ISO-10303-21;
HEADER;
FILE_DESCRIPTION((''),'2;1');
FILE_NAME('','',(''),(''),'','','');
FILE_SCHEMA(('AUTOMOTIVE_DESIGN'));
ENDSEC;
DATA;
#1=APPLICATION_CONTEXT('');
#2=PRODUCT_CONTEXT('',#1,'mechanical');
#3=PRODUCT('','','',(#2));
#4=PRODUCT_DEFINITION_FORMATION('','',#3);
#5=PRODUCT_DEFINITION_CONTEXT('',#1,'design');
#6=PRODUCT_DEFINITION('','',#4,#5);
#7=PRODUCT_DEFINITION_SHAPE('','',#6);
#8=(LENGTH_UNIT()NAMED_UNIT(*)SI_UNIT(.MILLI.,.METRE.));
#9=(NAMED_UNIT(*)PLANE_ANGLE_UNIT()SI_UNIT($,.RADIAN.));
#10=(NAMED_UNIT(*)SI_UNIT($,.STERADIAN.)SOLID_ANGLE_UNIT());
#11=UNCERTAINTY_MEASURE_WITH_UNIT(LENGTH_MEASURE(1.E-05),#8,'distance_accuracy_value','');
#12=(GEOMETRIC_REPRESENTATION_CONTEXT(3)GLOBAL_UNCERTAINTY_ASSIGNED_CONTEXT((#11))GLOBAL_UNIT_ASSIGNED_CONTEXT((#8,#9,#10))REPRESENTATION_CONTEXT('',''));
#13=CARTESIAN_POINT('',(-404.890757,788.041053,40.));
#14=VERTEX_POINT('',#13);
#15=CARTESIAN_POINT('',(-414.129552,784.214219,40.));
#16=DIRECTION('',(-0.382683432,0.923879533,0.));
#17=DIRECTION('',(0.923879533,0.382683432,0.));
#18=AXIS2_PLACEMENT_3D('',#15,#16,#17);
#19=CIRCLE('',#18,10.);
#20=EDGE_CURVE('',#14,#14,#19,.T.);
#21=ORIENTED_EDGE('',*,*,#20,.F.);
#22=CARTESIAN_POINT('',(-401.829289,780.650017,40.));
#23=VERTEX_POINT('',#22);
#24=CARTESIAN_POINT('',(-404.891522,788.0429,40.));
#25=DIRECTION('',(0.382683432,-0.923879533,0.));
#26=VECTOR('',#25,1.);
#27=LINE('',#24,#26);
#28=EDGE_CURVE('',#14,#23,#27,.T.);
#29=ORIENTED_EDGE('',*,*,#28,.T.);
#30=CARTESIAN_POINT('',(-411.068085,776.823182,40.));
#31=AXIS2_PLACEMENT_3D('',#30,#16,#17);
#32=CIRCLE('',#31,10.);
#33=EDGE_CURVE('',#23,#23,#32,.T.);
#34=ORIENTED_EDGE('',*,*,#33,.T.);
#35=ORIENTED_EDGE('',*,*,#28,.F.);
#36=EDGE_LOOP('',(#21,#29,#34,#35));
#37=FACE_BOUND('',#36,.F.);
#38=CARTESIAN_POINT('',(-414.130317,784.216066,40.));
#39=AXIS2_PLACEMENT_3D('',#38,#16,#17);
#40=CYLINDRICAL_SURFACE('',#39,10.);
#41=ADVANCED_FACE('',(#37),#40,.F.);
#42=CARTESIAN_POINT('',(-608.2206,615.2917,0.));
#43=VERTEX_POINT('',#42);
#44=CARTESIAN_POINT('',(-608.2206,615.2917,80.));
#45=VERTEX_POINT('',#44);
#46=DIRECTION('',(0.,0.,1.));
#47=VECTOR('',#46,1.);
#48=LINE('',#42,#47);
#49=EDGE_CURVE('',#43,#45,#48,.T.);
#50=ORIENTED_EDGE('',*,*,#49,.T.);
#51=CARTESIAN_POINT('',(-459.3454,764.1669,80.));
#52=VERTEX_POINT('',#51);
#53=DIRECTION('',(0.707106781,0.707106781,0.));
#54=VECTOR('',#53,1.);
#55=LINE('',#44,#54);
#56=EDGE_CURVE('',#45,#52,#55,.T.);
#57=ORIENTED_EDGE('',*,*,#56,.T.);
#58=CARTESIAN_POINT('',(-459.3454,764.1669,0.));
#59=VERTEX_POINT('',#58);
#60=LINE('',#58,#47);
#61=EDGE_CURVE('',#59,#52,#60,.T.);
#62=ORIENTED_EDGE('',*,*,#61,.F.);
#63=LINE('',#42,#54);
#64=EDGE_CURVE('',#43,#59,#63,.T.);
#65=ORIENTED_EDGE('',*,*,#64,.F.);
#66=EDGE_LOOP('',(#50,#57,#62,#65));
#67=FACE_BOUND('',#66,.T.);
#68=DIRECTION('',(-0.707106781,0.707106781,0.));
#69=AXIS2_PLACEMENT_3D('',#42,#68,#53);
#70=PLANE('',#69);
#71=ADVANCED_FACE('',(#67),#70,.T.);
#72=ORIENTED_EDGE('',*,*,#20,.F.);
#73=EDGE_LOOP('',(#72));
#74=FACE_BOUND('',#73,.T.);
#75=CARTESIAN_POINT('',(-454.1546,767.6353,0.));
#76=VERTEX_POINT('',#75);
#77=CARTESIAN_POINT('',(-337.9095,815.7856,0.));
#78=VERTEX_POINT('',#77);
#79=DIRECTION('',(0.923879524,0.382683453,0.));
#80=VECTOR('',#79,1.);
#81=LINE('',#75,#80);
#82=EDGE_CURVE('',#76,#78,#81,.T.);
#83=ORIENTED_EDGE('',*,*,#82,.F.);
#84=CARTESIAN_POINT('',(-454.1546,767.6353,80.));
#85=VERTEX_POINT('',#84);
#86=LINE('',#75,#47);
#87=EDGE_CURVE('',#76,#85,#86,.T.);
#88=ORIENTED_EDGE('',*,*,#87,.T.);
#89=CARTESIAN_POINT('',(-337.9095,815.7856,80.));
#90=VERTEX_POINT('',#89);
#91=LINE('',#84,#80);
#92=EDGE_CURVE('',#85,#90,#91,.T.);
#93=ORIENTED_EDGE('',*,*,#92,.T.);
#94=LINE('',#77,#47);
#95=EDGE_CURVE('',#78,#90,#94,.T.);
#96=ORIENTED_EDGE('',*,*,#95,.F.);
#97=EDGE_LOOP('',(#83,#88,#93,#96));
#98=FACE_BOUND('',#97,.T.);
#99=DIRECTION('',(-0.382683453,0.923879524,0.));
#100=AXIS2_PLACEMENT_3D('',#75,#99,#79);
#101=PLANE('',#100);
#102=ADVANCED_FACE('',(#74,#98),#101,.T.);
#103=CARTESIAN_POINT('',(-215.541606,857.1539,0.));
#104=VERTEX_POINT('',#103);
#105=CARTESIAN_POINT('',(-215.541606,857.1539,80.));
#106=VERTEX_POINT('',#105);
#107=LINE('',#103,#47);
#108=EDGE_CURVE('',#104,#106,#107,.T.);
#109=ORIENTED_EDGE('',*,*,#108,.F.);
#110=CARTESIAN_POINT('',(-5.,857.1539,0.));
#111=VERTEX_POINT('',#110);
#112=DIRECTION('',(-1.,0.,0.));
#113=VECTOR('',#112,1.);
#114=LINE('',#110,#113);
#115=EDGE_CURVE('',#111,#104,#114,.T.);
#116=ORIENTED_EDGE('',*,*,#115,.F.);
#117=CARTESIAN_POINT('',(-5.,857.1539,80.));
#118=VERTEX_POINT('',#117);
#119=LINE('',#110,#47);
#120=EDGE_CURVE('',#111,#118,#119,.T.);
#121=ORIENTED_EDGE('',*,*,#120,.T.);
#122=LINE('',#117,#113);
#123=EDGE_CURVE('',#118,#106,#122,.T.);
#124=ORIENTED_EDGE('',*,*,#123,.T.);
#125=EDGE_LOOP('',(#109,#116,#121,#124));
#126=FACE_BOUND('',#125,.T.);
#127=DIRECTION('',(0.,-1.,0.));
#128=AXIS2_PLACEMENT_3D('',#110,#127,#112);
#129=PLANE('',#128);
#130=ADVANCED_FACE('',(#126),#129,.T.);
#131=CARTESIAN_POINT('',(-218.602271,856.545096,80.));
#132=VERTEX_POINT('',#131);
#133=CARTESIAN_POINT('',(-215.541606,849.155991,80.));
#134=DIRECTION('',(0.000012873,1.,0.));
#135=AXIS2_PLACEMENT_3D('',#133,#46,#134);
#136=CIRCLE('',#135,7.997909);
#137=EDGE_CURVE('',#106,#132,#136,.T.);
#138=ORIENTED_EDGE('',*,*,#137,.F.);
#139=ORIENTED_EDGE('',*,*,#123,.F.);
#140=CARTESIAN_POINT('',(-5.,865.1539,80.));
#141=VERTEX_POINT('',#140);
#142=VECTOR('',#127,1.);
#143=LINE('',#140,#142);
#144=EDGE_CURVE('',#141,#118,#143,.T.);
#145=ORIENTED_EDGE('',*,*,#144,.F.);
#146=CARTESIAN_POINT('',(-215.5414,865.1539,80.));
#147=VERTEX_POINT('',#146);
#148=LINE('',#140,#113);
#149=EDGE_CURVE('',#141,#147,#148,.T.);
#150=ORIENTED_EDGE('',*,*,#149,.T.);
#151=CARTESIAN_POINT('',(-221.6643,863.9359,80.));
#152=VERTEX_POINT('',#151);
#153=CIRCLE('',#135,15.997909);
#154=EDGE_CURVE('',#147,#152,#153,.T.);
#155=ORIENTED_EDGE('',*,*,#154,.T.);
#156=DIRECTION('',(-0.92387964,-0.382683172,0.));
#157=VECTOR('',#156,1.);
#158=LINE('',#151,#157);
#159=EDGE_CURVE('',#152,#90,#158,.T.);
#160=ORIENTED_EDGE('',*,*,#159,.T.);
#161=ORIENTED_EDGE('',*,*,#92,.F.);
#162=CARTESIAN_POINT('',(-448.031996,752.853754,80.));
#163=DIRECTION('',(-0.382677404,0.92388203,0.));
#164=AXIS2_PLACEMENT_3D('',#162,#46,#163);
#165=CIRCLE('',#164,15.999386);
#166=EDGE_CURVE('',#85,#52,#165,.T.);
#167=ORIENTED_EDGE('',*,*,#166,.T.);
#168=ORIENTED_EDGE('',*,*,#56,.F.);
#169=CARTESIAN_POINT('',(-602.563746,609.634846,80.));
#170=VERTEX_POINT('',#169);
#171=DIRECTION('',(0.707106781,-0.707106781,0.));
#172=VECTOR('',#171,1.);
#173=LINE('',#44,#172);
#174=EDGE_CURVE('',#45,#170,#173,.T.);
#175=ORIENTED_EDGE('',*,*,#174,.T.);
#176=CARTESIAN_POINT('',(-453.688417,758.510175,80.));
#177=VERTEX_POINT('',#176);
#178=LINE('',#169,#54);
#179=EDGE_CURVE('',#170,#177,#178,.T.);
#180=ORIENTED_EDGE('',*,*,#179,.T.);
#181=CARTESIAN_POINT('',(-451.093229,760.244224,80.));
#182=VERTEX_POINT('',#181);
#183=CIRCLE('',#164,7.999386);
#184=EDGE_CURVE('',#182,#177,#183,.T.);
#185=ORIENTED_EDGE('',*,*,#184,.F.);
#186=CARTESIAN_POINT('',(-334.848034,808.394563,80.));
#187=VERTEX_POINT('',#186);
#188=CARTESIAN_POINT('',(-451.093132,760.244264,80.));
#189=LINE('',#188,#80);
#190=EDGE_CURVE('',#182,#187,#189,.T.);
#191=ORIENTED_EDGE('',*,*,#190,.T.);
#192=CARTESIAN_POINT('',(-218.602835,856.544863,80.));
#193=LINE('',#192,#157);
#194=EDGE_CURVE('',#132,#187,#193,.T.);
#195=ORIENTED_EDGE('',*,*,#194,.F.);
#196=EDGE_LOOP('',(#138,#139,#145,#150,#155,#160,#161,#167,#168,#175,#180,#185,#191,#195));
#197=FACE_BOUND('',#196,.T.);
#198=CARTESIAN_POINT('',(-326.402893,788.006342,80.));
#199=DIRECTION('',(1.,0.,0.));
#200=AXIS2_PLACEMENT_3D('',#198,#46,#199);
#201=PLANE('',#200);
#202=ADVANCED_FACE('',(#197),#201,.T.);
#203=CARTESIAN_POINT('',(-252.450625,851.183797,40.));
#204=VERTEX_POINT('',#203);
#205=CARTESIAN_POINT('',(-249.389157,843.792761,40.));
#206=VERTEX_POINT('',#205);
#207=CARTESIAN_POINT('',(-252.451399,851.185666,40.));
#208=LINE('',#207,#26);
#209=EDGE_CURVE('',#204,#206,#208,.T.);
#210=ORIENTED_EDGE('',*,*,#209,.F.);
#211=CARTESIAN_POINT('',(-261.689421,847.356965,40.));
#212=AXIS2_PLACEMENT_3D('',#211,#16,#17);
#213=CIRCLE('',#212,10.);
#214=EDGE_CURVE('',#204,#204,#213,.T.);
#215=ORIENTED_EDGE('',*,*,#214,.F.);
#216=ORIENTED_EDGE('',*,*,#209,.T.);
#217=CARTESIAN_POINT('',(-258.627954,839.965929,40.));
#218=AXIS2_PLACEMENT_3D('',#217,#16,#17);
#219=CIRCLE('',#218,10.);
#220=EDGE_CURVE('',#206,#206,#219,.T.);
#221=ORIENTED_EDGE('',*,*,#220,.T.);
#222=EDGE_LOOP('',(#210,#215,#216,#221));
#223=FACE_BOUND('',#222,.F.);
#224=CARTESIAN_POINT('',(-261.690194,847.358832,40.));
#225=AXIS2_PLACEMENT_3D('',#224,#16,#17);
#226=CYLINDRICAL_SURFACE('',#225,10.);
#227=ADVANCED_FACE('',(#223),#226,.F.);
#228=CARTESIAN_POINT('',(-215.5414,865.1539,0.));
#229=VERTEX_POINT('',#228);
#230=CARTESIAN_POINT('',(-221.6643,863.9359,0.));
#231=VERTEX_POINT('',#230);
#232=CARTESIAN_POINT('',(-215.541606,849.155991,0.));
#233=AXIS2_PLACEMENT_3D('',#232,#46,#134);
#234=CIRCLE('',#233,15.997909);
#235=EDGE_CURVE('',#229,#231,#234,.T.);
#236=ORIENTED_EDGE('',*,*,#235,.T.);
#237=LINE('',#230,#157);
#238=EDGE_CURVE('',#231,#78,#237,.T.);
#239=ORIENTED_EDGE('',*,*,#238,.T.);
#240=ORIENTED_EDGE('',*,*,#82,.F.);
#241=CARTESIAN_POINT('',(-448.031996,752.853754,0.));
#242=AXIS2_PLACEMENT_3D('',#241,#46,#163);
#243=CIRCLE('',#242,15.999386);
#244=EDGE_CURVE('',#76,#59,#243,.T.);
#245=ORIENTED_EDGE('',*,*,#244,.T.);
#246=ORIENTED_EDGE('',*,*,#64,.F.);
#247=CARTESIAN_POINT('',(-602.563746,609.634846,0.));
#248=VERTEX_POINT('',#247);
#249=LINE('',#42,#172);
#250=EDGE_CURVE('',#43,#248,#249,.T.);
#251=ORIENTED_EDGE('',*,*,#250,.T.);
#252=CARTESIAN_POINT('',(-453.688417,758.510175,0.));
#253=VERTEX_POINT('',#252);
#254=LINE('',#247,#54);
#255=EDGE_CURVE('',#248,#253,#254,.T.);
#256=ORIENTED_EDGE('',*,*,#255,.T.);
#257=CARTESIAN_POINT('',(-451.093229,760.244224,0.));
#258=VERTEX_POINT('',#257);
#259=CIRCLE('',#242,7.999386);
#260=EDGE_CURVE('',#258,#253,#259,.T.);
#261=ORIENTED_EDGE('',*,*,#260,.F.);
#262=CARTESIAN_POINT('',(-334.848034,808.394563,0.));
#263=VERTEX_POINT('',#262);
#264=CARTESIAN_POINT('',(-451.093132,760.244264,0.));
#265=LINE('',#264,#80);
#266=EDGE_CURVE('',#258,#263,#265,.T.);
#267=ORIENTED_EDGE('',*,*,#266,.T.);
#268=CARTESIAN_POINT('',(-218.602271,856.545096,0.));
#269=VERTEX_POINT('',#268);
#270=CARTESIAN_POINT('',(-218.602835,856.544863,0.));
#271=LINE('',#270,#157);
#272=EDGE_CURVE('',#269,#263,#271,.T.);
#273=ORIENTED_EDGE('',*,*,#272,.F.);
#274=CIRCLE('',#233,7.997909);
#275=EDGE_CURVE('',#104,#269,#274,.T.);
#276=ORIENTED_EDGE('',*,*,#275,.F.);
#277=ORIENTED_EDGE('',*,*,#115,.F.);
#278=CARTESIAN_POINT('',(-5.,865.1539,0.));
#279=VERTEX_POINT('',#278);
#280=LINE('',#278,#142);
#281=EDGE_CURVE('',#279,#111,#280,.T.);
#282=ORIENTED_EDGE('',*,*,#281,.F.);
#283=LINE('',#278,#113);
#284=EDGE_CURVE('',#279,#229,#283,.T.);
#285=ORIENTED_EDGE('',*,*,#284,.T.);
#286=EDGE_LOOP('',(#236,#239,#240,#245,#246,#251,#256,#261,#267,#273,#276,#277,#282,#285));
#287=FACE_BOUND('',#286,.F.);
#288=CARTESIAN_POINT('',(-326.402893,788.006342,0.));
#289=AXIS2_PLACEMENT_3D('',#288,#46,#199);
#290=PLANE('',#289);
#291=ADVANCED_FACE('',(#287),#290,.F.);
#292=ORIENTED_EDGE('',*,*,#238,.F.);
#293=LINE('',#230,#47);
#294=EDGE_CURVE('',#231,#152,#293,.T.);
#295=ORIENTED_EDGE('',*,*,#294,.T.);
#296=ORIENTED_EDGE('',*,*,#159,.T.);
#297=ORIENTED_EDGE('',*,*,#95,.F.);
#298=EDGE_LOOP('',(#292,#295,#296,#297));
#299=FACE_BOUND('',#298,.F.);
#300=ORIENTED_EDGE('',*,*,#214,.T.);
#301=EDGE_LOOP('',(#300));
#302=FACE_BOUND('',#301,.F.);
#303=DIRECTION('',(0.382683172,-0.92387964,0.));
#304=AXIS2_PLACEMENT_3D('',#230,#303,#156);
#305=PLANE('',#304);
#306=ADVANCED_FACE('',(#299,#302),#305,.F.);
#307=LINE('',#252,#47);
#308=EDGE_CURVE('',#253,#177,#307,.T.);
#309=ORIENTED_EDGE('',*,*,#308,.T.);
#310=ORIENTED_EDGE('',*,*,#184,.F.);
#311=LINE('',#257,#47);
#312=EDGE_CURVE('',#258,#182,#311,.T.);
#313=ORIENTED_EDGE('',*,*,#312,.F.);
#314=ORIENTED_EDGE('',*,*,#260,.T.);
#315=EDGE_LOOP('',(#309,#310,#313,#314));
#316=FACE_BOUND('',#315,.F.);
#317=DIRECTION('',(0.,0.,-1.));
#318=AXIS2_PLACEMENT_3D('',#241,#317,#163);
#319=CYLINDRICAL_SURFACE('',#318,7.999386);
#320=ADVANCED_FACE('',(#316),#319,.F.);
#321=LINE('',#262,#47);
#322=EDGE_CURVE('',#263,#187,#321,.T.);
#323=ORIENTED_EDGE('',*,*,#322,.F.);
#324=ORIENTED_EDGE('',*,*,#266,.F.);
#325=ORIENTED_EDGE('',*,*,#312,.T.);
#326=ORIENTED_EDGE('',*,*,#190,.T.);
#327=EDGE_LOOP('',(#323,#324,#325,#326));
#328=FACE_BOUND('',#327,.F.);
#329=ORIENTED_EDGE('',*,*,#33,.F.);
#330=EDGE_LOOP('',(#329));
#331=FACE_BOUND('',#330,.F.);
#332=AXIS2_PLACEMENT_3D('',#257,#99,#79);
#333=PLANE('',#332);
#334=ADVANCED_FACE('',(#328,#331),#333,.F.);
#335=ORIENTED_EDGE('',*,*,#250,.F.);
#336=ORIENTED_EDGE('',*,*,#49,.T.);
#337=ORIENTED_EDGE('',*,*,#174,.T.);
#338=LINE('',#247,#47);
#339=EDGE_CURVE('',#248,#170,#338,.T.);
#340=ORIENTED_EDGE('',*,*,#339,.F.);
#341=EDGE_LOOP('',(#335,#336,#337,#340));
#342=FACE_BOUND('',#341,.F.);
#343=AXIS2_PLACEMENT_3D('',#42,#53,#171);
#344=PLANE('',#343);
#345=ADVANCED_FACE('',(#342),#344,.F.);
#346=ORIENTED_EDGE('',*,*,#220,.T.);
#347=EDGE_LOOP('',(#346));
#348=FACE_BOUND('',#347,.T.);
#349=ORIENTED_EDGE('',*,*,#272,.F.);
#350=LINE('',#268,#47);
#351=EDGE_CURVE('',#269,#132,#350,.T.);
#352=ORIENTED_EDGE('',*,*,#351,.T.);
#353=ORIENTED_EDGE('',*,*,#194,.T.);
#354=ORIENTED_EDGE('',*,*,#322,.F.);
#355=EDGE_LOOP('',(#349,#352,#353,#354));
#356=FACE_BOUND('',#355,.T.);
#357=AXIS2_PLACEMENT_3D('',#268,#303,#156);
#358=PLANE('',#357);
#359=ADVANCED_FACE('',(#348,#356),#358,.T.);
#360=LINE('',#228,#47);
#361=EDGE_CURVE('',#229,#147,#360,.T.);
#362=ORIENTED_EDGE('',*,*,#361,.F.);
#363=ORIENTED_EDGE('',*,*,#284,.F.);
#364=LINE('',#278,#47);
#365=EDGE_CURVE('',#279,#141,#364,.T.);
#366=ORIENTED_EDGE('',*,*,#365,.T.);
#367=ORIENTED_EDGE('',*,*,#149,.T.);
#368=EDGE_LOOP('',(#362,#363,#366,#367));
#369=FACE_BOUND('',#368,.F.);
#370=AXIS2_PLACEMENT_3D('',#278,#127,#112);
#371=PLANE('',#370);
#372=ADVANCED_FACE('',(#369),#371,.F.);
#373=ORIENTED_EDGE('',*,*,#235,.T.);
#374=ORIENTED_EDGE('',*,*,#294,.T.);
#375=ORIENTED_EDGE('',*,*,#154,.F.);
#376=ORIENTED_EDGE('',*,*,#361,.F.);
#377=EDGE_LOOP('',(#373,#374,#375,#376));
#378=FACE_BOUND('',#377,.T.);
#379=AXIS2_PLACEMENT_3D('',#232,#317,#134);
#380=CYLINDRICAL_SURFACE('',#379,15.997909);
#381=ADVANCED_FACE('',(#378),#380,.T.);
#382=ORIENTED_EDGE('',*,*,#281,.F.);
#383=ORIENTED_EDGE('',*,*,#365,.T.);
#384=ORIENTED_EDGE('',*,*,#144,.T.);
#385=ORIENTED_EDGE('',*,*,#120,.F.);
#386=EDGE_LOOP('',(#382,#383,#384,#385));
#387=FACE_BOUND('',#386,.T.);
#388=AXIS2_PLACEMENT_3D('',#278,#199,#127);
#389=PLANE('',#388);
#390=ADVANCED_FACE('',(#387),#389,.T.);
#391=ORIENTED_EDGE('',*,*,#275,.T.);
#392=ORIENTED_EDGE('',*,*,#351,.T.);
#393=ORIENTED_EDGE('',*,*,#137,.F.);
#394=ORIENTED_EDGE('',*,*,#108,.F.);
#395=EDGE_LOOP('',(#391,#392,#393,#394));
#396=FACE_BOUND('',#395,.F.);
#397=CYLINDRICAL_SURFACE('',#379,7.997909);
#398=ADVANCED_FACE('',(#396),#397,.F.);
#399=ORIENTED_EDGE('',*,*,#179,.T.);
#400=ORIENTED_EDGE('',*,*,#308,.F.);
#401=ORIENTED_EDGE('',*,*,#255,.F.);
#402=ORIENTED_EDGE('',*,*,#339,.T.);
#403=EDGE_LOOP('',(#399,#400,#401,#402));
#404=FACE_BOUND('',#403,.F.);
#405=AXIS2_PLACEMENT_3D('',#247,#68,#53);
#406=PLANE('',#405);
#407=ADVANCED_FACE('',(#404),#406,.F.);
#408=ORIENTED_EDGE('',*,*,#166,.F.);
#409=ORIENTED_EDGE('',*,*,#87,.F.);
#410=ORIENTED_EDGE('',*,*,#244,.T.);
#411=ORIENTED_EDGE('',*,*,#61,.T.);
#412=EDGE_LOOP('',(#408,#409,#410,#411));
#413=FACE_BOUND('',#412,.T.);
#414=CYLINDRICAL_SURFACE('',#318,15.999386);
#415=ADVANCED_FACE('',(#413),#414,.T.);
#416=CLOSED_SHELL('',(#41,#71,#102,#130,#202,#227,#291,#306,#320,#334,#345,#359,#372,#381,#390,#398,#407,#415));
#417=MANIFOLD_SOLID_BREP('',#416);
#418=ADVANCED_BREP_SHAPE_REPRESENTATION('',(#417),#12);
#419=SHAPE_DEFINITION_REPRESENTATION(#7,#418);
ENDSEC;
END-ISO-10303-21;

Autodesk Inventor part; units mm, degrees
ref_plane "YZ Plane" through (0, 0, 0) normal (1, 0, 0) x (0, 1, 0)
ref_plane "XZ Plane" through (0, 0, 0) normal (0, 1, 0) x (-1, 0, 0)
ref_plane "XY Plane" through (0, 0, 0) normal (0, 0, 1) x (1, 0, 0)
sketch "Sketch2" plane through (0, 0, 0) normal (0, 0, 1) x (1, 0, 0)
  line L0 (0, 273.8452) -> (193.6378, 193.6378) construction
  line L1 (193.6378, 193.6378) -> (273.8452, 0) construction
  line L2 (273.8452, 0) -> (193.6378, -193.6378) construction
  line L3 (193.6378, -193.6378) -> (0, -273.8452) construction
  line L4 (0, -273.8452) -> (-193.6378, -193.6378) construction
  line L5 (-193.6378, -193.6378) -> (-273.8452, 0) construction
  line L6 (-273.8452, 0) -> (-193.6378, 193.6378) construction
  line L7 (-193.6378, 193.6378) -> (0, 273.8452) construction
  line L8 (-193.6378, 193.6378) -> (0, 273.8452) construction
  line L9 (-459.9272, 770.6562) -> (-219.7185, 870.1539) construction
  line L10 (-96.8189, 233.7415) -> (-339.8229, 820.405) construction
  line L11 (-219.7185, 870.1539) -> (0, 870.1539) construction
  line L12 (0, 870.1539) -> (0, 273.8452) construction
  line L13 (-459.9272, 770.6562) -> (-615.2917, 615.2917) construction
  line L14 (-615.2917, 615.2917) -> (-193.6378, 193.6378) construction
  line L15 (-221.6643, 863.9359) -> (-337.9095, 815.7856)
  line L16 (-5, 865.1539) -> (-215.5414, 865.1539)
  line L17 (-454.1546, 767.6353) -> (-337.9095, 815.7856)
  line L18 (-608.2206, 615.2917) -> (-459.3454, 764.1669)
  arc A0 (-215.5414, 865.1539) -> (-221.6643, 863.9359) centre (-215.5414, 849.1539) ccw
  arc A1 (-454.1546, 767.6353) -> (-459.3454, 764.1669) centre (-448.0317, 752.8532) ccw
  point P0 (0, 0)
  point P1 (0, 0)
  point P2 (0, 0)
  point P3 (-218.724, 865.1539)
  point P4 (-457.095, 766.4174)
  dimension "d0" = 506
  dimension "d1" = 260
  dimension "d2" = 635
  dimension "d6" = 5
  dimension "d10" = 5
  dimension "d14" = 5
  dimension "d15" = 16
contour flange "Contour Flange1" sketch "Sketch2" thickness 8 bend radius 8 width 80 along (0, 0, 1) mid plane no both sides no wall seen from (-110.2707, 865.1539, 0) lies toward (0, -1, 0) curves L16 A0 L15 L17 A1 L18
bend "Bend1"
corner "Corner1"
sketch "Sketch3" plane through (-454.1546, 767.6353, 80) normal (-0.3826834, 0.9238795, 0) x (0.9238795, 0.3826834, 0)
  line L0 (125.8228, 80) -> (125.8228, 0) construction
  line L1 (0, 0) -> (251.6457, 0) projected
  circle A0 centre (43.3228, 40) radius 10
  circle A1 centre (208.3228, 40) radius 10
  point P0 (125.8228, 40)
  dimension "d27" = 20
  dimension "d28" = 82.5
extrude "Extrusion1" cut sketch "Sketch3" against normal up to surface (8 mm away)
equation "\"d0\" = Барабан_габарит_по_кассетам"
equation "\"d1\" = Кассета_длина_грани"
equation "\"d2\" = Кассета_высота"
equation "\"d10\" = d6"
equation "\"d15\" = BendRadius + Thickness"
equation "\"d16\" = Thickness"
equation "\"d17\" = BendReliefWidth"
equation "\"d18\" = BendReliefDepth"
equation "\"d19\" = MinimumRemnant"
equation "\"d20\" = TransitionRadius"
equation "\"d22\" = BendRadius"
equation "\"d24\" = CornerReliefSize"
equation "\"d25\" = GapSize"
equation "\"d26\" = JacobiRadiusSize"
equation "\"BendRadius\" = Thickness"
equation "\"BendReliefWidth\" = Thickness"
equation "\"BendReliefDepth\" = 0.5 * Thickness"
equation "\"CornerReliefSize\" = 4 * Thickness"
equation "\"MinimumRemnant\" = 2 * Thickness"
equation "\"TransitionRadius\" = BendRadius"
equation "\"JacobiRadiusSize\" = BendRadius"
equation "\"GapSize\" = Thickness"
equation "\"Барабан_габарит_по_кассетам\" = 506"
equation "\"Кассета_длина_грани\" = 260"
equation "\"Кассета_высота\" = 635"
equation "\"Thickness\" = 8"
properties part number "ДМФ 0122 Верхний лист"
